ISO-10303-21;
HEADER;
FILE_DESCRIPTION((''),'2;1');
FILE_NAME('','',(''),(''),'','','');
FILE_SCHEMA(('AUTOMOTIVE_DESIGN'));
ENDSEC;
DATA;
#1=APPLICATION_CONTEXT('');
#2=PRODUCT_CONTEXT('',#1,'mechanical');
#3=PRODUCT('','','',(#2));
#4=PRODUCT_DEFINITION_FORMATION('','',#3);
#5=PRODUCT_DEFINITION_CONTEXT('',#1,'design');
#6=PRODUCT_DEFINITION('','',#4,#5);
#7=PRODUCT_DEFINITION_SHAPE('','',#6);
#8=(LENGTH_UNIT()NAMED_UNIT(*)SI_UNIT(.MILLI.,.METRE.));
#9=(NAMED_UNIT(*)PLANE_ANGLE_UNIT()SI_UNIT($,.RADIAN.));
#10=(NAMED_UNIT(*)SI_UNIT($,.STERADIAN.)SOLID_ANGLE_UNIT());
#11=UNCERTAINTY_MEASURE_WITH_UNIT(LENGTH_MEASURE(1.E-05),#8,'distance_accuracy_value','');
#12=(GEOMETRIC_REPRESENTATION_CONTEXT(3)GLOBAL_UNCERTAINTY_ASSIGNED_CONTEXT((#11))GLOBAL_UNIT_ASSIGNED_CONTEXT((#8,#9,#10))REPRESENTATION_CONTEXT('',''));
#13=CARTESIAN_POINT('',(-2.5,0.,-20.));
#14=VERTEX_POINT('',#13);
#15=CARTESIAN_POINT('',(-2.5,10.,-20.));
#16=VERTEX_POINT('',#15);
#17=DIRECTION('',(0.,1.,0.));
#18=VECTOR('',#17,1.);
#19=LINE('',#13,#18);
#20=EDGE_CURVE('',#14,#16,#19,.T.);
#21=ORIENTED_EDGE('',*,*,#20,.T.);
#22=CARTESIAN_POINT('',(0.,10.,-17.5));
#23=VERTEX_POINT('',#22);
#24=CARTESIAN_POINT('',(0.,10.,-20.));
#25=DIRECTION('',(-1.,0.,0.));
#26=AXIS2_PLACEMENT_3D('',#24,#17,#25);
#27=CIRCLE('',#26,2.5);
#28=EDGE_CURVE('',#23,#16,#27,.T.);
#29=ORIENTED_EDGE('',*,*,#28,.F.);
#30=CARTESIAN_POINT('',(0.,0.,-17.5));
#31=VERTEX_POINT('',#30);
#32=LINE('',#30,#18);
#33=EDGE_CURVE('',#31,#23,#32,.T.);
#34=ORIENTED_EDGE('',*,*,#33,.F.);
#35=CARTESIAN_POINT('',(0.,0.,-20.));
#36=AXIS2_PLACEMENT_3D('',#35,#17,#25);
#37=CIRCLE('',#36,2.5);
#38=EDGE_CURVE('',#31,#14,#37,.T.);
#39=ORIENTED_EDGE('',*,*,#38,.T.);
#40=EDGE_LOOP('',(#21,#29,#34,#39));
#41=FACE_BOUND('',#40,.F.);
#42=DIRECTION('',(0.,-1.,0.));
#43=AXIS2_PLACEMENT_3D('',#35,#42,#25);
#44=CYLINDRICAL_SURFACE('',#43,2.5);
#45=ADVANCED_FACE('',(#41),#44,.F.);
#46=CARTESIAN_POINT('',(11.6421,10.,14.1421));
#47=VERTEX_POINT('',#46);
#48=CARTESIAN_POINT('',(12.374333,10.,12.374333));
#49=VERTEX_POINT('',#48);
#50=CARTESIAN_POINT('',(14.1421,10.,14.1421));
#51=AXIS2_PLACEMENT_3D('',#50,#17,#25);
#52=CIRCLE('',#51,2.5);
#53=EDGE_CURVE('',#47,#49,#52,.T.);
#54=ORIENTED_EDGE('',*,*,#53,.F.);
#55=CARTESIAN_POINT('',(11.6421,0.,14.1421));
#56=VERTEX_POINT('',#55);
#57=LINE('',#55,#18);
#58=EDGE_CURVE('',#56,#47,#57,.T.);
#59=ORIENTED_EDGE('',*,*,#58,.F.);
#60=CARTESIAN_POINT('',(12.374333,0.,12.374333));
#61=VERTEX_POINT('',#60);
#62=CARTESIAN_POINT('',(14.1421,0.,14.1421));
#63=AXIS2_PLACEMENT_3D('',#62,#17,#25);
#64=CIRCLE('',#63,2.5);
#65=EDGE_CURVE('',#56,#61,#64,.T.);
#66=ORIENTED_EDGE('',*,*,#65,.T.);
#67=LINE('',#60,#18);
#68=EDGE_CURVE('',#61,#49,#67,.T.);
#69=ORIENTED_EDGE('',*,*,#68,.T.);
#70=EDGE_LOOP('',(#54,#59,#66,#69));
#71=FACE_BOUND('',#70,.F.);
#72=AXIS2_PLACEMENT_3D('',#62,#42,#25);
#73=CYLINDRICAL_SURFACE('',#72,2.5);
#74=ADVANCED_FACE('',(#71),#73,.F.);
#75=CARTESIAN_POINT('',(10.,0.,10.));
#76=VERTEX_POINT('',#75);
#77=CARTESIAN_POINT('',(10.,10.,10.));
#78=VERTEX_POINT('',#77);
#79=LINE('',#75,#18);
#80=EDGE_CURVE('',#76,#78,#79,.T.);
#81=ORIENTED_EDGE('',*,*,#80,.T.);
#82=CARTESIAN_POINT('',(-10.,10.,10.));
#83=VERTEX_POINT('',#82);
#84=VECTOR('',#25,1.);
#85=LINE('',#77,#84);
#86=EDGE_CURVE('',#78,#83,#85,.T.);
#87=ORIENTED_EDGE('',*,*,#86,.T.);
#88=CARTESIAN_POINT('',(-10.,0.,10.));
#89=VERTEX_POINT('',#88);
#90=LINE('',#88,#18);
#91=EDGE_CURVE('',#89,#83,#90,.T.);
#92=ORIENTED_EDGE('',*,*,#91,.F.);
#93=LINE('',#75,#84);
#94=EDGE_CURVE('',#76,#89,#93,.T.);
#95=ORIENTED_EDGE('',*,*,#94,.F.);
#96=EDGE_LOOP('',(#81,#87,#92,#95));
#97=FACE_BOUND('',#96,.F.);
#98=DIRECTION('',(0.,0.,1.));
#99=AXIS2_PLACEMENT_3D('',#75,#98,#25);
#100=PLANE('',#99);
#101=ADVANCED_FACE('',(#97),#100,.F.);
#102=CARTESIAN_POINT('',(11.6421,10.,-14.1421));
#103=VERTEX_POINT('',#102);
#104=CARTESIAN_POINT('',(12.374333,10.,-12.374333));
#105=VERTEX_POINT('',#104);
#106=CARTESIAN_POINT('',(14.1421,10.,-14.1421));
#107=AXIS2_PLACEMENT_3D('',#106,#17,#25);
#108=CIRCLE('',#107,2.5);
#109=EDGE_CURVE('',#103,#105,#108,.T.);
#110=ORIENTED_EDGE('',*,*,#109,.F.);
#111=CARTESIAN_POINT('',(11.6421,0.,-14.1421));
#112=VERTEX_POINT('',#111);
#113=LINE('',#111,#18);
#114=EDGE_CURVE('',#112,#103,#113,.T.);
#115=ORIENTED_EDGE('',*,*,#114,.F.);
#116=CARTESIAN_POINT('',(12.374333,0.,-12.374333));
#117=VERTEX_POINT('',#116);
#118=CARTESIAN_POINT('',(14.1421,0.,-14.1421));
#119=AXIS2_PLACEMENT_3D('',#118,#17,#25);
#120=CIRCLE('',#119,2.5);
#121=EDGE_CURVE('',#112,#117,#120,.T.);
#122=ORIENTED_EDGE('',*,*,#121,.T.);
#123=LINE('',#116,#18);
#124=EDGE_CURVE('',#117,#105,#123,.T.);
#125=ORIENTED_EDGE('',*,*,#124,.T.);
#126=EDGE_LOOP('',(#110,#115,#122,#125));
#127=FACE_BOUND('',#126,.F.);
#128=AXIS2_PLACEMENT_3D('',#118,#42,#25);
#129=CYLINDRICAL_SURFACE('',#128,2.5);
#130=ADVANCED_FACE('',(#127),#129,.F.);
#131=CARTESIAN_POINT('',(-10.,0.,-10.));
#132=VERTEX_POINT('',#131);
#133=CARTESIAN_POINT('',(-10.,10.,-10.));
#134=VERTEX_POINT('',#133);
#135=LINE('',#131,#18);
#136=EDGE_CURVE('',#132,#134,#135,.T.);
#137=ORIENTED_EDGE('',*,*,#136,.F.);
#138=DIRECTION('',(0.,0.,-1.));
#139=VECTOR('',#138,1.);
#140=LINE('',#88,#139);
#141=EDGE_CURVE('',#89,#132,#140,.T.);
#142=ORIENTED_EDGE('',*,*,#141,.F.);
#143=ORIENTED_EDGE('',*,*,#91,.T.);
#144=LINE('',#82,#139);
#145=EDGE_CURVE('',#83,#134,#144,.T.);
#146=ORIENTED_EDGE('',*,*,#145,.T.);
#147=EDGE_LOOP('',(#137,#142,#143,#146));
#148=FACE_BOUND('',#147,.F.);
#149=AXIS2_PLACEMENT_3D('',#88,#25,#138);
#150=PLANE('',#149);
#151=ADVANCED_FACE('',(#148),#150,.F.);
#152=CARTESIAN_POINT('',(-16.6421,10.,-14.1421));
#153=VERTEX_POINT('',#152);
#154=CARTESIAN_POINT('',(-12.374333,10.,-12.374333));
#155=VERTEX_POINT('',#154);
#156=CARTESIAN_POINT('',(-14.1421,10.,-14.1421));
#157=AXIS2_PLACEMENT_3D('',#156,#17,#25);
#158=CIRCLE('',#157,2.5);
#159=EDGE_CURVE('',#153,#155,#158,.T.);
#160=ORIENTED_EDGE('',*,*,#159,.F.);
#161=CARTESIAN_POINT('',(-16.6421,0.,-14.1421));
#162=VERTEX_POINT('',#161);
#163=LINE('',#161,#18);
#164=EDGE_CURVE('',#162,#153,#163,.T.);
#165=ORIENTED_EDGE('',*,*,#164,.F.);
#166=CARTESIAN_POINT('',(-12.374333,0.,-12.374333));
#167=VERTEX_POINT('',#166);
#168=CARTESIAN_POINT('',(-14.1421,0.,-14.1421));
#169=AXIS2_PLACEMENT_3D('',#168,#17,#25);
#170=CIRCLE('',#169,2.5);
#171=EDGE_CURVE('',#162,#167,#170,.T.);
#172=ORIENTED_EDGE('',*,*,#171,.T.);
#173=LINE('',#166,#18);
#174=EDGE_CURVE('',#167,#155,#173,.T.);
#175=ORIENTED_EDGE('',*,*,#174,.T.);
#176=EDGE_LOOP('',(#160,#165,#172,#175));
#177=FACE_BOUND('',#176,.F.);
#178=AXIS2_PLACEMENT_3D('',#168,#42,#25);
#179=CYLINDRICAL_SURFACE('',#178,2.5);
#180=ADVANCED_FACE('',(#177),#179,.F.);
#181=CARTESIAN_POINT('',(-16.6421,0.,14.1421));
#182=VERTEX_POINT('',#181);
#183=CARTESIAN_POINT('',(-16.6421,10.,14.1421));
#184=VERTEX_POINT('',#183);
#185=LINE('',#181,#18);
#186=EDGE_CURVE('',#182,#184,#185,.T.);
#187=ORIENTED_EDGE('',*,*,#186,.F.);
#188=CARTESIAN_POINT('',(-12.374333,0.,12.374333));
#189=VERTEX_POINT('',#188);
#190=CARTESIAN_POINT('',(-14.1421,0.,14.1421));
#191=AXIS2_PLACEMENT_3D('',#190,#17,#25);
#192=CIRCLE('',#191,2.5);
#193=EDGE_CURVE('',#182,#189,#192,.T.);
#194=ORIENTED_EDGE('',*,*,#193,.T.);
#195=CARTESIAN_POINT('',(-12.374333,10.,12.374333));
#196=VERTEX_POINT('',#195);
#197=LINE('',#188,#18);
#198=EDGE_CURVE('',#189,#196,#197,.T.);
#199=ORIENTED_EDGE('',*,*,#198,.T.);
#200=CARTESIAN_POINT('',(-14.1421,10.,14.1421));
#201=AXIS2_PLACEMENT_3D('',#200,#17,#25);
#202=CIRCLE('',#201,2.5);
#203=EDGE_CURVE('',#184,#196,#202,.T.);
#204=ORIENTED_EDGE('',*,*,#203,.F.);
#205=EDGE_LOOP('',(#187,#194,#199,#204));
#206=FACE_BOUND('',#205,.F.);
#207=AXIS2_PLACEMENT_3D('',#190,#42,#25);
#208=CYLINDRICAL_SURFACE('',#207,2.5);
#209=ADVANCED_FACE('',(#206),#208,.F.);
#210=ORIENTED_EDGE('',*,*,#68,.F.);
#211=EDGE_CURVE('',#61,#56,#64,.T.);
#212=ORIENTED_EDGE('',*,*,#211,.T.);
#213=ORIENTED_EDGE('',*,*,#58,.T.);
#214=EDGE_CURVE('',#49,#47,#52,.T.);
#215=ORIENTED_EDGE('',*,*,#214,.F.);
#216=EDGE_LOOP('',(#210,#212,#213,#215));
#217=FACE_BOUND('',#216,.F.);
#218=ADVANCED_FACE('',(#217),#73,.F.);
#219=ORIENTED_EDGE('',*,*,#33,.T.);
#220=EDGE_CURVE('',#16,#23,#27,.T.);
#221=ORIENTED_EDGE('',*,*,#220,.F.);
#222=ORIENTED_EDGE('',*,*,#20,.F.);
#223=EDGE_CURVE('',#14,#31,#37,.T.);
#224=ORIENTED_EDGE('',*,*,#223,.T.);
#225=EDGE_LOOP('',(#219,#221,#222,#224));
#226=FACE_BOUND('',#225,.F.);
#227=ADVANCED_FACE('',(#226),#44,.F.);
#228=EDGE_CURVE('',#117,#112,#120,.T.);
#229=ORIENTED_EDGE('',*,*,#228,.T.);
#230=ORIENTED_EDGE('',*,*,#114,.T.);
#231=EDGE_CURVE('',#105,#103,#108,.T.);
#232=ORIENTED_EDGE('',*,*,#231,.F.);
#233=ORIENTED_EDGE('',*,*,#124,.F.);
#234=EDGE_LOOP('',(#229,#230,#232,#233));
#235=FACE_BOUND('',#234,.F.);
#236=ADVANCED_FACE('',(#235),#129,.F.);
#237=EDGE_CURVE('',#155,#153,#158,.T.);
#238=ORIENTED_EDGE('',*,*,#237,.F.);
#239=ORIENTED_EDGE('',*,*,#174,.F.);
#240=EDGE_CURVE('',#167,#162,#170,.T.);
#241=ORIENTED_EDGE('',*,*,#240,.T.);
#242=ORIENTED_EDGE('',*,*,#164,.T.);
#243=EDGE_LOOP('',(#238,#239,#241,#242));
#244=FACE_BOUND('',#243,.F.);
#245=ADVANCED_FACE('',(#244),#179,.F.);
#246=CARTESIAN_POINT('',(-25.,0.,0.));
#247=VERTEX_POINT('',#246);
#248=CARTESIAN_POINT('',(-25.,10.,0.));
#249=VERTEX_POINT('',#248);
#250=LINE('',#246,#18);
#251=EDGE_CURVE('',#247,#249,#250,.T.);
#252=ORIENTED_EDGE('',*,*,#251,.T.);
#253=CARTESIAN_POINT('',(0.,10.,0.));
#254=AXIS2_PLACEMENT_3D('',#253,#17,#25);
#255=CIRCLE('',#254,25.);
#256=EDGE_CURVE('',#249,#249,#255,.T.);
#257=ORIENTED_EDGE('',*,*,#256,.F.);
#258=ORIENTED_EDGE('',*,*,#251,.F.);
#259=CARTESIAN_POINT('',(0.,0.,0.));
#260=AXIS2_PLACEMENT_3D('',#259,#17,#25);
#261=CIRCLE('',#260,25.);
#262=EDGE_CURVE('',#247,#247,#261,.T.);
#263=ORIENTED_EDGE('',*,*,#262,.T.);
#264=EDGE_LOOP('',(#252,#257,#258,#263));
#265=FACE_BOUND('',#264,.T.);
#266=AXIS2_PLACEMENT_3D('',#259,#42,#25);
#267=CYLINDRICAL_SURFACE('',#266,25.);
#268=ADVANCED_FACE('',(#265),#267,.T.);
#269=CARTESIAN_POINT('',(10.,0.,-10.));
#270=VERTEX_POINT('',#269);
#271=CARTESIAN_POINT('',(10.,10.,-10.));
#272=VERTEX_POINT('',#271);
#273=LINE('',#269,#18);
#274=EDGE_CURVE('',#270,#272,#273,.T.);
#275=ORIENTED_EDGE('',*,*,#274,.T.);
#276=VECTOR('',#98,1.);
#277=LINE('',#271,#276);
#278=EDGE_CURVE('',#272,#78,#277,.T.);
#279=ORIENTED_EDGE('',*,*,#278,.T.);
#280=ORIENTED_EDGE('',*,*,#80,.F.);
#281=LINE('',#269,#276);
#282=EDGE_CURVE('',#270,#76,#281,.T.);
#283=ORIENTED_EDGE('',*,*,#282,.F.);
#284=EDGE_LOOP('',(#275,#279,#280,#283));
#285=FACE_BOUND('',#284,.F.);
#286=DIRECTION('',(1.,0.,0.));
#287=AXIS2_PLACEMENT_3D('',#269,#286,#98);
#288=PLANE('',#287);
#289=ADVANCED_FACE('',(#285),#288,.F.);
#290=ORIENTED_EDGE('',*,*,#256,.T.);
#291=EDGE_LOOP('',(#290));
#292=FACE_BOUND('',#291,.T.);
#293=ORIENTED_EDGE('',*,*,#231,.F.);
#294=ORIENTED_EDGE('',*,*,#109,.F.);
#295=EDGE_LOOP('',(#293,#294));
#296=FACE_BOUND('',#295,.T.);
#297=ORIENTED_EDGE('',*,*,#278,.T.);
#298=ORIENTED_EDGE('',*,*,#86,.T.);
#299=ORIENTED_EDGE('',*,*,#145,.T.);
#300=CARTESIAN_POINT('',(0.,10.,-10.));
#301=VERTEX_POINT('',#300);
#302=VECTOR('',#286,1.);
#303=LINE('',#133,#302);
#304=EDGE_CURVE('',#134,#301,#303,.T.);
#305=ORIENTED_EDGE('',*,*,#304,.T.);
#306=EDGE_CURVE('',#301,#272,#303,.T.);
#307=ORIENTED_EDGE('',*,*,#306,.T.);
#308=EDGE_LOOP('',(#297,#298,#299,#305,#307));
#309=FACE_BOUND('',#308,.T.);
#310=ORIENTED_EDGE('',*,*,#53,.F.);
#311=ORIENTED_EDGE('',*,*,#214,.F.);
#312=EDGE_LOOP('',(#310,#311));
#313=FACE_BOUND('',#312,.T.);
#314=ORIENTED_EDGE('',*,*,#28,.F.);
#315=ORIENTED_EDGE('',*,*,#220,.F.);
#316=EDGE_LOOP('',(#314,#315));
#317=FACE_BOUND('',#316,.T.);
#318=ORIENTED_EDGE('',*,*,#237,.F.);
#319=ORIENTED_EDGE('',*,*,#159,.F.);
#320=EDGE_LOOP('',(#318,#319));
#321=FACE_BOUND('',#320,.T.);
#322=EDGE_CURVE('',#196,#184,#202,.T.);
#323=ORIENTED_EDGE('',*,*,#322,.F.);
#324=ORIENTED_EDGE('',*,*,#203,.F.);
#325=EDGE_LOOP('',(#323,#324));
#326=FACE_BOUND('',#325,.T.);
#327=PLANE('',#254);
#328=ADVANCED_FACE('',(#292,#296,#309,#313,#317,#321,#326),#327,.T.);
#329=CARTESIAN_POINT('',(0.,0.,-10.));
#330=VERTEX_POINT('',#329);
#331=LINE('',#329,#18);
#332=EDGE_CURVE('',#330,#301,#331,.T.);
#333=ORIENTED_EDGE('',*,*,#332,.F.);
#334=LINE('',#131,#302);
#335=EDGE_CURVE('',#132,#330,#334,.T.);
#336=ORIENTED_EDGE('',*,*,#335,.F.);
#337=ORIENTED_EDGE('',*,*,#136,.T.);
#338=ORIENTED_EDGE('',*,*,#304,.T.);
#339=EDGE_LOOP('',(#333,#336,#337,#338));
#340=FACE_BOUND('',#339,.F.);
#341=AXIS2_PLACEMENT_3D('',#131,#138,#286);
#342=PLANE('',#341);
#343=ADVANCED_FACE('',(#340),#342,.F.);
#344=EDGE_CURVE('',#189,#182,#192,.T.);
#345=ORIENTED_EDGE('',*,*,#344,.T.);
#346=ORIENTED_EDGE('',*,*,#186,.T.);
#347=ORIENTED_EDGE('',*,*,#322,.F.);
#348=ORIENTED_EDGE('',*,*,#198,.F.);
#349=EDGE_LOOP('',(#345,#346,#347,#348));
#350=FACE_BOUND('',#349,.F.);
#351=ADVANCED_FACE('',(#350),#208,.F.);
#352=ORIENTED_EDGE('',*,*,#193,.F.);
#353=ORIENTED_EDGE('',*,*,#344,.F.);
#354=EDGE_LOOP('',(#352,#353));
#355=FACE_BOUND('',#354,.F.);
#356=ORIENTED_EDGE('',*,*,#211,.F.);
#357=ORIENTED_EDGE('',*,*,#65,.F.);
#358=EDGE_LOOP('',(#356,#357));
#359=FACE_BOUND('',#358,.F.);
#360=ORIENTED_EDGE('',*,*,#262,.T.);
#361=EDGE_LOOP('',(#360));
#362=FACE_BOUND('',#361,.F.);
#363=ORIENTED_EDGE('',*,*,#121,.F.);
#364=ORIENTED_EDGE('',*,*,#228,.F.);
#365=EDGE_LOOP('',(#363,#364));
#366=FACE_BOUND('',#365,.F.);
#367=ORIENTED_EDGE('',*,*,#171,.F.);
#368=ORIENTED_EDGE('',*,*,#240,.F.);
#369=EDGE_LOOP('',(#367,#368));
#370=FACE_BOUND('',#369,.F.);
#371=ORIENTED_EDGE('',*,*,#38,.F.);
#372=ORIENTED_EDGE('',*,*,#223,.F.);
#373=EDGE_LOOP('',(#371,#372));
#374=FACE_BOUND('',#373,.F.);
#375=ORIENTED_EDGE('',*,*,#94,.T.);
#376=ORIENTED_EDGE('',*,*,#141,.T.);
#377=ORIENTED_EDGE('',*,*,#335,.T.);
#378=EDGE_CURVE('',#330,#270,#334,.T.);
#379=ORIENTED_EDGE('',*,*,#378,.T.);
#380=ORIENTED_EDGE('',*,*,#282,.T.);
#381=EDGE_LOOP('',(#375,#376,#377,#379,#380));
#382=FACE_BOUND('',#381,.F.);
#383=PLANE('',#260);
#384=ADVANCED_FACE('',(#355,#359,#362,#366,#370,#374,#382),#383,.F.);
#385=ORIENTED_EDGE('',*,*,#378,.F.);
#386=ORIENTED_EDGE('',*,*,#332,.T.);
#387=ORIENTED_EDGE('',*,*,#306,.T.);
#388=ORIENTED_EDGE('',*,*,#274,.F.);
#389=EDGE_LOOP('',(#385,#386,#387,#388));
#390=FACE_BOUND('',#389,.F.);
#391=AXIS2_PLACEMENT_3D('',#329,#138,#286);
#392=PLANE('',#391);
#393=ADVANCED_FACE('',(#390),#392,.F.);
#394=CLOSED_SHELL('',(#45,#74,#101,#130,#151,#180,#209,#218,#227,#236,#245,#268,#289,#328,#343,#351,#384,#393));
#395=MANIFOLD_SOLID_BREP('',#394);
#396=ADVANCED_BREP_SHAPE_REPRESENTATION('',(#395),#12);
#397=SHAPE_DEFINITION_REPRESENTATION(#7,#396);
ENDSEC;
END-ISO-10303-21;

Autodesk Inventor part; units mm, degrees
ref_plane "YZ Plane" through (0, 0, 0) normal (1, 0, 0) x (0, 1, 0)
ref_plane "XZ Plane" through (0, 0, 0) normal (0, 1, 0) x (-1, 0, 0)
ref_plane "XY Plane" through (0, 0, 0) normal (0, 0, 1) x (1, 0, 0)
sketch "Sketch1" plane through (0, 0, 0) normal (0, 1, 0) x (-1, 0, 0)
  circle A0 centre (-14.1421, -14.1421) radius 2.5
  circle A1 centre (-14.1421, 14.1421) radius 2.5
  line L0 (0, 0) -> (-14.1421, 14.1421)
  line L1 (0, 0) -> (0, -20)
  line L2 (0, 0) -> (-14.1421, -14.1421)
  circle A2 centre (0, -20) radius 2.5
  circle A3 centre (0, 0) radius 25
  line L3 (0, 0) -> (14.1421, 14.1421)
  line L4 (0, 0) -> (14.1421, -14.1421)
  circle A4 centre (14.1421, 14.1421) radius 2.5
  circle A5 centre (14.1421, -14.1421) radius 2.5
  line L5 (-10, 10) -> (10, 10)
  line L6 (10, 10) -> (10, -10)
  line L7 (10, -10) -> (-10, -10)
  line L8 (-10, -10) -> (-10, 10)
  line L9 (-10, 10) -> (10, -10) construction
  line L10 (10, 10) -> (-10, -10) construction
  dimension "d0" = 20
  dimension "d1" = 20
  dimension "d2" = 135
  dimension "d3" = 5
  dimension "d4" = 5
  dimension "d5" = 20
  dimension "d6" = 90
  dimension "d7" = 5
  dimension "d8" = 20
  dimension "d9" = 90
  dimension "d10" = 5
  dimension "d11" = 20
  dimension "d12" = 90
  dimension "d13" = 5
  dimension "d14" = 20
  dimension "d15" = 20
extrude "Extrusion1" add sketch "Sketch1" along normal blind 10
properties part number "base"
